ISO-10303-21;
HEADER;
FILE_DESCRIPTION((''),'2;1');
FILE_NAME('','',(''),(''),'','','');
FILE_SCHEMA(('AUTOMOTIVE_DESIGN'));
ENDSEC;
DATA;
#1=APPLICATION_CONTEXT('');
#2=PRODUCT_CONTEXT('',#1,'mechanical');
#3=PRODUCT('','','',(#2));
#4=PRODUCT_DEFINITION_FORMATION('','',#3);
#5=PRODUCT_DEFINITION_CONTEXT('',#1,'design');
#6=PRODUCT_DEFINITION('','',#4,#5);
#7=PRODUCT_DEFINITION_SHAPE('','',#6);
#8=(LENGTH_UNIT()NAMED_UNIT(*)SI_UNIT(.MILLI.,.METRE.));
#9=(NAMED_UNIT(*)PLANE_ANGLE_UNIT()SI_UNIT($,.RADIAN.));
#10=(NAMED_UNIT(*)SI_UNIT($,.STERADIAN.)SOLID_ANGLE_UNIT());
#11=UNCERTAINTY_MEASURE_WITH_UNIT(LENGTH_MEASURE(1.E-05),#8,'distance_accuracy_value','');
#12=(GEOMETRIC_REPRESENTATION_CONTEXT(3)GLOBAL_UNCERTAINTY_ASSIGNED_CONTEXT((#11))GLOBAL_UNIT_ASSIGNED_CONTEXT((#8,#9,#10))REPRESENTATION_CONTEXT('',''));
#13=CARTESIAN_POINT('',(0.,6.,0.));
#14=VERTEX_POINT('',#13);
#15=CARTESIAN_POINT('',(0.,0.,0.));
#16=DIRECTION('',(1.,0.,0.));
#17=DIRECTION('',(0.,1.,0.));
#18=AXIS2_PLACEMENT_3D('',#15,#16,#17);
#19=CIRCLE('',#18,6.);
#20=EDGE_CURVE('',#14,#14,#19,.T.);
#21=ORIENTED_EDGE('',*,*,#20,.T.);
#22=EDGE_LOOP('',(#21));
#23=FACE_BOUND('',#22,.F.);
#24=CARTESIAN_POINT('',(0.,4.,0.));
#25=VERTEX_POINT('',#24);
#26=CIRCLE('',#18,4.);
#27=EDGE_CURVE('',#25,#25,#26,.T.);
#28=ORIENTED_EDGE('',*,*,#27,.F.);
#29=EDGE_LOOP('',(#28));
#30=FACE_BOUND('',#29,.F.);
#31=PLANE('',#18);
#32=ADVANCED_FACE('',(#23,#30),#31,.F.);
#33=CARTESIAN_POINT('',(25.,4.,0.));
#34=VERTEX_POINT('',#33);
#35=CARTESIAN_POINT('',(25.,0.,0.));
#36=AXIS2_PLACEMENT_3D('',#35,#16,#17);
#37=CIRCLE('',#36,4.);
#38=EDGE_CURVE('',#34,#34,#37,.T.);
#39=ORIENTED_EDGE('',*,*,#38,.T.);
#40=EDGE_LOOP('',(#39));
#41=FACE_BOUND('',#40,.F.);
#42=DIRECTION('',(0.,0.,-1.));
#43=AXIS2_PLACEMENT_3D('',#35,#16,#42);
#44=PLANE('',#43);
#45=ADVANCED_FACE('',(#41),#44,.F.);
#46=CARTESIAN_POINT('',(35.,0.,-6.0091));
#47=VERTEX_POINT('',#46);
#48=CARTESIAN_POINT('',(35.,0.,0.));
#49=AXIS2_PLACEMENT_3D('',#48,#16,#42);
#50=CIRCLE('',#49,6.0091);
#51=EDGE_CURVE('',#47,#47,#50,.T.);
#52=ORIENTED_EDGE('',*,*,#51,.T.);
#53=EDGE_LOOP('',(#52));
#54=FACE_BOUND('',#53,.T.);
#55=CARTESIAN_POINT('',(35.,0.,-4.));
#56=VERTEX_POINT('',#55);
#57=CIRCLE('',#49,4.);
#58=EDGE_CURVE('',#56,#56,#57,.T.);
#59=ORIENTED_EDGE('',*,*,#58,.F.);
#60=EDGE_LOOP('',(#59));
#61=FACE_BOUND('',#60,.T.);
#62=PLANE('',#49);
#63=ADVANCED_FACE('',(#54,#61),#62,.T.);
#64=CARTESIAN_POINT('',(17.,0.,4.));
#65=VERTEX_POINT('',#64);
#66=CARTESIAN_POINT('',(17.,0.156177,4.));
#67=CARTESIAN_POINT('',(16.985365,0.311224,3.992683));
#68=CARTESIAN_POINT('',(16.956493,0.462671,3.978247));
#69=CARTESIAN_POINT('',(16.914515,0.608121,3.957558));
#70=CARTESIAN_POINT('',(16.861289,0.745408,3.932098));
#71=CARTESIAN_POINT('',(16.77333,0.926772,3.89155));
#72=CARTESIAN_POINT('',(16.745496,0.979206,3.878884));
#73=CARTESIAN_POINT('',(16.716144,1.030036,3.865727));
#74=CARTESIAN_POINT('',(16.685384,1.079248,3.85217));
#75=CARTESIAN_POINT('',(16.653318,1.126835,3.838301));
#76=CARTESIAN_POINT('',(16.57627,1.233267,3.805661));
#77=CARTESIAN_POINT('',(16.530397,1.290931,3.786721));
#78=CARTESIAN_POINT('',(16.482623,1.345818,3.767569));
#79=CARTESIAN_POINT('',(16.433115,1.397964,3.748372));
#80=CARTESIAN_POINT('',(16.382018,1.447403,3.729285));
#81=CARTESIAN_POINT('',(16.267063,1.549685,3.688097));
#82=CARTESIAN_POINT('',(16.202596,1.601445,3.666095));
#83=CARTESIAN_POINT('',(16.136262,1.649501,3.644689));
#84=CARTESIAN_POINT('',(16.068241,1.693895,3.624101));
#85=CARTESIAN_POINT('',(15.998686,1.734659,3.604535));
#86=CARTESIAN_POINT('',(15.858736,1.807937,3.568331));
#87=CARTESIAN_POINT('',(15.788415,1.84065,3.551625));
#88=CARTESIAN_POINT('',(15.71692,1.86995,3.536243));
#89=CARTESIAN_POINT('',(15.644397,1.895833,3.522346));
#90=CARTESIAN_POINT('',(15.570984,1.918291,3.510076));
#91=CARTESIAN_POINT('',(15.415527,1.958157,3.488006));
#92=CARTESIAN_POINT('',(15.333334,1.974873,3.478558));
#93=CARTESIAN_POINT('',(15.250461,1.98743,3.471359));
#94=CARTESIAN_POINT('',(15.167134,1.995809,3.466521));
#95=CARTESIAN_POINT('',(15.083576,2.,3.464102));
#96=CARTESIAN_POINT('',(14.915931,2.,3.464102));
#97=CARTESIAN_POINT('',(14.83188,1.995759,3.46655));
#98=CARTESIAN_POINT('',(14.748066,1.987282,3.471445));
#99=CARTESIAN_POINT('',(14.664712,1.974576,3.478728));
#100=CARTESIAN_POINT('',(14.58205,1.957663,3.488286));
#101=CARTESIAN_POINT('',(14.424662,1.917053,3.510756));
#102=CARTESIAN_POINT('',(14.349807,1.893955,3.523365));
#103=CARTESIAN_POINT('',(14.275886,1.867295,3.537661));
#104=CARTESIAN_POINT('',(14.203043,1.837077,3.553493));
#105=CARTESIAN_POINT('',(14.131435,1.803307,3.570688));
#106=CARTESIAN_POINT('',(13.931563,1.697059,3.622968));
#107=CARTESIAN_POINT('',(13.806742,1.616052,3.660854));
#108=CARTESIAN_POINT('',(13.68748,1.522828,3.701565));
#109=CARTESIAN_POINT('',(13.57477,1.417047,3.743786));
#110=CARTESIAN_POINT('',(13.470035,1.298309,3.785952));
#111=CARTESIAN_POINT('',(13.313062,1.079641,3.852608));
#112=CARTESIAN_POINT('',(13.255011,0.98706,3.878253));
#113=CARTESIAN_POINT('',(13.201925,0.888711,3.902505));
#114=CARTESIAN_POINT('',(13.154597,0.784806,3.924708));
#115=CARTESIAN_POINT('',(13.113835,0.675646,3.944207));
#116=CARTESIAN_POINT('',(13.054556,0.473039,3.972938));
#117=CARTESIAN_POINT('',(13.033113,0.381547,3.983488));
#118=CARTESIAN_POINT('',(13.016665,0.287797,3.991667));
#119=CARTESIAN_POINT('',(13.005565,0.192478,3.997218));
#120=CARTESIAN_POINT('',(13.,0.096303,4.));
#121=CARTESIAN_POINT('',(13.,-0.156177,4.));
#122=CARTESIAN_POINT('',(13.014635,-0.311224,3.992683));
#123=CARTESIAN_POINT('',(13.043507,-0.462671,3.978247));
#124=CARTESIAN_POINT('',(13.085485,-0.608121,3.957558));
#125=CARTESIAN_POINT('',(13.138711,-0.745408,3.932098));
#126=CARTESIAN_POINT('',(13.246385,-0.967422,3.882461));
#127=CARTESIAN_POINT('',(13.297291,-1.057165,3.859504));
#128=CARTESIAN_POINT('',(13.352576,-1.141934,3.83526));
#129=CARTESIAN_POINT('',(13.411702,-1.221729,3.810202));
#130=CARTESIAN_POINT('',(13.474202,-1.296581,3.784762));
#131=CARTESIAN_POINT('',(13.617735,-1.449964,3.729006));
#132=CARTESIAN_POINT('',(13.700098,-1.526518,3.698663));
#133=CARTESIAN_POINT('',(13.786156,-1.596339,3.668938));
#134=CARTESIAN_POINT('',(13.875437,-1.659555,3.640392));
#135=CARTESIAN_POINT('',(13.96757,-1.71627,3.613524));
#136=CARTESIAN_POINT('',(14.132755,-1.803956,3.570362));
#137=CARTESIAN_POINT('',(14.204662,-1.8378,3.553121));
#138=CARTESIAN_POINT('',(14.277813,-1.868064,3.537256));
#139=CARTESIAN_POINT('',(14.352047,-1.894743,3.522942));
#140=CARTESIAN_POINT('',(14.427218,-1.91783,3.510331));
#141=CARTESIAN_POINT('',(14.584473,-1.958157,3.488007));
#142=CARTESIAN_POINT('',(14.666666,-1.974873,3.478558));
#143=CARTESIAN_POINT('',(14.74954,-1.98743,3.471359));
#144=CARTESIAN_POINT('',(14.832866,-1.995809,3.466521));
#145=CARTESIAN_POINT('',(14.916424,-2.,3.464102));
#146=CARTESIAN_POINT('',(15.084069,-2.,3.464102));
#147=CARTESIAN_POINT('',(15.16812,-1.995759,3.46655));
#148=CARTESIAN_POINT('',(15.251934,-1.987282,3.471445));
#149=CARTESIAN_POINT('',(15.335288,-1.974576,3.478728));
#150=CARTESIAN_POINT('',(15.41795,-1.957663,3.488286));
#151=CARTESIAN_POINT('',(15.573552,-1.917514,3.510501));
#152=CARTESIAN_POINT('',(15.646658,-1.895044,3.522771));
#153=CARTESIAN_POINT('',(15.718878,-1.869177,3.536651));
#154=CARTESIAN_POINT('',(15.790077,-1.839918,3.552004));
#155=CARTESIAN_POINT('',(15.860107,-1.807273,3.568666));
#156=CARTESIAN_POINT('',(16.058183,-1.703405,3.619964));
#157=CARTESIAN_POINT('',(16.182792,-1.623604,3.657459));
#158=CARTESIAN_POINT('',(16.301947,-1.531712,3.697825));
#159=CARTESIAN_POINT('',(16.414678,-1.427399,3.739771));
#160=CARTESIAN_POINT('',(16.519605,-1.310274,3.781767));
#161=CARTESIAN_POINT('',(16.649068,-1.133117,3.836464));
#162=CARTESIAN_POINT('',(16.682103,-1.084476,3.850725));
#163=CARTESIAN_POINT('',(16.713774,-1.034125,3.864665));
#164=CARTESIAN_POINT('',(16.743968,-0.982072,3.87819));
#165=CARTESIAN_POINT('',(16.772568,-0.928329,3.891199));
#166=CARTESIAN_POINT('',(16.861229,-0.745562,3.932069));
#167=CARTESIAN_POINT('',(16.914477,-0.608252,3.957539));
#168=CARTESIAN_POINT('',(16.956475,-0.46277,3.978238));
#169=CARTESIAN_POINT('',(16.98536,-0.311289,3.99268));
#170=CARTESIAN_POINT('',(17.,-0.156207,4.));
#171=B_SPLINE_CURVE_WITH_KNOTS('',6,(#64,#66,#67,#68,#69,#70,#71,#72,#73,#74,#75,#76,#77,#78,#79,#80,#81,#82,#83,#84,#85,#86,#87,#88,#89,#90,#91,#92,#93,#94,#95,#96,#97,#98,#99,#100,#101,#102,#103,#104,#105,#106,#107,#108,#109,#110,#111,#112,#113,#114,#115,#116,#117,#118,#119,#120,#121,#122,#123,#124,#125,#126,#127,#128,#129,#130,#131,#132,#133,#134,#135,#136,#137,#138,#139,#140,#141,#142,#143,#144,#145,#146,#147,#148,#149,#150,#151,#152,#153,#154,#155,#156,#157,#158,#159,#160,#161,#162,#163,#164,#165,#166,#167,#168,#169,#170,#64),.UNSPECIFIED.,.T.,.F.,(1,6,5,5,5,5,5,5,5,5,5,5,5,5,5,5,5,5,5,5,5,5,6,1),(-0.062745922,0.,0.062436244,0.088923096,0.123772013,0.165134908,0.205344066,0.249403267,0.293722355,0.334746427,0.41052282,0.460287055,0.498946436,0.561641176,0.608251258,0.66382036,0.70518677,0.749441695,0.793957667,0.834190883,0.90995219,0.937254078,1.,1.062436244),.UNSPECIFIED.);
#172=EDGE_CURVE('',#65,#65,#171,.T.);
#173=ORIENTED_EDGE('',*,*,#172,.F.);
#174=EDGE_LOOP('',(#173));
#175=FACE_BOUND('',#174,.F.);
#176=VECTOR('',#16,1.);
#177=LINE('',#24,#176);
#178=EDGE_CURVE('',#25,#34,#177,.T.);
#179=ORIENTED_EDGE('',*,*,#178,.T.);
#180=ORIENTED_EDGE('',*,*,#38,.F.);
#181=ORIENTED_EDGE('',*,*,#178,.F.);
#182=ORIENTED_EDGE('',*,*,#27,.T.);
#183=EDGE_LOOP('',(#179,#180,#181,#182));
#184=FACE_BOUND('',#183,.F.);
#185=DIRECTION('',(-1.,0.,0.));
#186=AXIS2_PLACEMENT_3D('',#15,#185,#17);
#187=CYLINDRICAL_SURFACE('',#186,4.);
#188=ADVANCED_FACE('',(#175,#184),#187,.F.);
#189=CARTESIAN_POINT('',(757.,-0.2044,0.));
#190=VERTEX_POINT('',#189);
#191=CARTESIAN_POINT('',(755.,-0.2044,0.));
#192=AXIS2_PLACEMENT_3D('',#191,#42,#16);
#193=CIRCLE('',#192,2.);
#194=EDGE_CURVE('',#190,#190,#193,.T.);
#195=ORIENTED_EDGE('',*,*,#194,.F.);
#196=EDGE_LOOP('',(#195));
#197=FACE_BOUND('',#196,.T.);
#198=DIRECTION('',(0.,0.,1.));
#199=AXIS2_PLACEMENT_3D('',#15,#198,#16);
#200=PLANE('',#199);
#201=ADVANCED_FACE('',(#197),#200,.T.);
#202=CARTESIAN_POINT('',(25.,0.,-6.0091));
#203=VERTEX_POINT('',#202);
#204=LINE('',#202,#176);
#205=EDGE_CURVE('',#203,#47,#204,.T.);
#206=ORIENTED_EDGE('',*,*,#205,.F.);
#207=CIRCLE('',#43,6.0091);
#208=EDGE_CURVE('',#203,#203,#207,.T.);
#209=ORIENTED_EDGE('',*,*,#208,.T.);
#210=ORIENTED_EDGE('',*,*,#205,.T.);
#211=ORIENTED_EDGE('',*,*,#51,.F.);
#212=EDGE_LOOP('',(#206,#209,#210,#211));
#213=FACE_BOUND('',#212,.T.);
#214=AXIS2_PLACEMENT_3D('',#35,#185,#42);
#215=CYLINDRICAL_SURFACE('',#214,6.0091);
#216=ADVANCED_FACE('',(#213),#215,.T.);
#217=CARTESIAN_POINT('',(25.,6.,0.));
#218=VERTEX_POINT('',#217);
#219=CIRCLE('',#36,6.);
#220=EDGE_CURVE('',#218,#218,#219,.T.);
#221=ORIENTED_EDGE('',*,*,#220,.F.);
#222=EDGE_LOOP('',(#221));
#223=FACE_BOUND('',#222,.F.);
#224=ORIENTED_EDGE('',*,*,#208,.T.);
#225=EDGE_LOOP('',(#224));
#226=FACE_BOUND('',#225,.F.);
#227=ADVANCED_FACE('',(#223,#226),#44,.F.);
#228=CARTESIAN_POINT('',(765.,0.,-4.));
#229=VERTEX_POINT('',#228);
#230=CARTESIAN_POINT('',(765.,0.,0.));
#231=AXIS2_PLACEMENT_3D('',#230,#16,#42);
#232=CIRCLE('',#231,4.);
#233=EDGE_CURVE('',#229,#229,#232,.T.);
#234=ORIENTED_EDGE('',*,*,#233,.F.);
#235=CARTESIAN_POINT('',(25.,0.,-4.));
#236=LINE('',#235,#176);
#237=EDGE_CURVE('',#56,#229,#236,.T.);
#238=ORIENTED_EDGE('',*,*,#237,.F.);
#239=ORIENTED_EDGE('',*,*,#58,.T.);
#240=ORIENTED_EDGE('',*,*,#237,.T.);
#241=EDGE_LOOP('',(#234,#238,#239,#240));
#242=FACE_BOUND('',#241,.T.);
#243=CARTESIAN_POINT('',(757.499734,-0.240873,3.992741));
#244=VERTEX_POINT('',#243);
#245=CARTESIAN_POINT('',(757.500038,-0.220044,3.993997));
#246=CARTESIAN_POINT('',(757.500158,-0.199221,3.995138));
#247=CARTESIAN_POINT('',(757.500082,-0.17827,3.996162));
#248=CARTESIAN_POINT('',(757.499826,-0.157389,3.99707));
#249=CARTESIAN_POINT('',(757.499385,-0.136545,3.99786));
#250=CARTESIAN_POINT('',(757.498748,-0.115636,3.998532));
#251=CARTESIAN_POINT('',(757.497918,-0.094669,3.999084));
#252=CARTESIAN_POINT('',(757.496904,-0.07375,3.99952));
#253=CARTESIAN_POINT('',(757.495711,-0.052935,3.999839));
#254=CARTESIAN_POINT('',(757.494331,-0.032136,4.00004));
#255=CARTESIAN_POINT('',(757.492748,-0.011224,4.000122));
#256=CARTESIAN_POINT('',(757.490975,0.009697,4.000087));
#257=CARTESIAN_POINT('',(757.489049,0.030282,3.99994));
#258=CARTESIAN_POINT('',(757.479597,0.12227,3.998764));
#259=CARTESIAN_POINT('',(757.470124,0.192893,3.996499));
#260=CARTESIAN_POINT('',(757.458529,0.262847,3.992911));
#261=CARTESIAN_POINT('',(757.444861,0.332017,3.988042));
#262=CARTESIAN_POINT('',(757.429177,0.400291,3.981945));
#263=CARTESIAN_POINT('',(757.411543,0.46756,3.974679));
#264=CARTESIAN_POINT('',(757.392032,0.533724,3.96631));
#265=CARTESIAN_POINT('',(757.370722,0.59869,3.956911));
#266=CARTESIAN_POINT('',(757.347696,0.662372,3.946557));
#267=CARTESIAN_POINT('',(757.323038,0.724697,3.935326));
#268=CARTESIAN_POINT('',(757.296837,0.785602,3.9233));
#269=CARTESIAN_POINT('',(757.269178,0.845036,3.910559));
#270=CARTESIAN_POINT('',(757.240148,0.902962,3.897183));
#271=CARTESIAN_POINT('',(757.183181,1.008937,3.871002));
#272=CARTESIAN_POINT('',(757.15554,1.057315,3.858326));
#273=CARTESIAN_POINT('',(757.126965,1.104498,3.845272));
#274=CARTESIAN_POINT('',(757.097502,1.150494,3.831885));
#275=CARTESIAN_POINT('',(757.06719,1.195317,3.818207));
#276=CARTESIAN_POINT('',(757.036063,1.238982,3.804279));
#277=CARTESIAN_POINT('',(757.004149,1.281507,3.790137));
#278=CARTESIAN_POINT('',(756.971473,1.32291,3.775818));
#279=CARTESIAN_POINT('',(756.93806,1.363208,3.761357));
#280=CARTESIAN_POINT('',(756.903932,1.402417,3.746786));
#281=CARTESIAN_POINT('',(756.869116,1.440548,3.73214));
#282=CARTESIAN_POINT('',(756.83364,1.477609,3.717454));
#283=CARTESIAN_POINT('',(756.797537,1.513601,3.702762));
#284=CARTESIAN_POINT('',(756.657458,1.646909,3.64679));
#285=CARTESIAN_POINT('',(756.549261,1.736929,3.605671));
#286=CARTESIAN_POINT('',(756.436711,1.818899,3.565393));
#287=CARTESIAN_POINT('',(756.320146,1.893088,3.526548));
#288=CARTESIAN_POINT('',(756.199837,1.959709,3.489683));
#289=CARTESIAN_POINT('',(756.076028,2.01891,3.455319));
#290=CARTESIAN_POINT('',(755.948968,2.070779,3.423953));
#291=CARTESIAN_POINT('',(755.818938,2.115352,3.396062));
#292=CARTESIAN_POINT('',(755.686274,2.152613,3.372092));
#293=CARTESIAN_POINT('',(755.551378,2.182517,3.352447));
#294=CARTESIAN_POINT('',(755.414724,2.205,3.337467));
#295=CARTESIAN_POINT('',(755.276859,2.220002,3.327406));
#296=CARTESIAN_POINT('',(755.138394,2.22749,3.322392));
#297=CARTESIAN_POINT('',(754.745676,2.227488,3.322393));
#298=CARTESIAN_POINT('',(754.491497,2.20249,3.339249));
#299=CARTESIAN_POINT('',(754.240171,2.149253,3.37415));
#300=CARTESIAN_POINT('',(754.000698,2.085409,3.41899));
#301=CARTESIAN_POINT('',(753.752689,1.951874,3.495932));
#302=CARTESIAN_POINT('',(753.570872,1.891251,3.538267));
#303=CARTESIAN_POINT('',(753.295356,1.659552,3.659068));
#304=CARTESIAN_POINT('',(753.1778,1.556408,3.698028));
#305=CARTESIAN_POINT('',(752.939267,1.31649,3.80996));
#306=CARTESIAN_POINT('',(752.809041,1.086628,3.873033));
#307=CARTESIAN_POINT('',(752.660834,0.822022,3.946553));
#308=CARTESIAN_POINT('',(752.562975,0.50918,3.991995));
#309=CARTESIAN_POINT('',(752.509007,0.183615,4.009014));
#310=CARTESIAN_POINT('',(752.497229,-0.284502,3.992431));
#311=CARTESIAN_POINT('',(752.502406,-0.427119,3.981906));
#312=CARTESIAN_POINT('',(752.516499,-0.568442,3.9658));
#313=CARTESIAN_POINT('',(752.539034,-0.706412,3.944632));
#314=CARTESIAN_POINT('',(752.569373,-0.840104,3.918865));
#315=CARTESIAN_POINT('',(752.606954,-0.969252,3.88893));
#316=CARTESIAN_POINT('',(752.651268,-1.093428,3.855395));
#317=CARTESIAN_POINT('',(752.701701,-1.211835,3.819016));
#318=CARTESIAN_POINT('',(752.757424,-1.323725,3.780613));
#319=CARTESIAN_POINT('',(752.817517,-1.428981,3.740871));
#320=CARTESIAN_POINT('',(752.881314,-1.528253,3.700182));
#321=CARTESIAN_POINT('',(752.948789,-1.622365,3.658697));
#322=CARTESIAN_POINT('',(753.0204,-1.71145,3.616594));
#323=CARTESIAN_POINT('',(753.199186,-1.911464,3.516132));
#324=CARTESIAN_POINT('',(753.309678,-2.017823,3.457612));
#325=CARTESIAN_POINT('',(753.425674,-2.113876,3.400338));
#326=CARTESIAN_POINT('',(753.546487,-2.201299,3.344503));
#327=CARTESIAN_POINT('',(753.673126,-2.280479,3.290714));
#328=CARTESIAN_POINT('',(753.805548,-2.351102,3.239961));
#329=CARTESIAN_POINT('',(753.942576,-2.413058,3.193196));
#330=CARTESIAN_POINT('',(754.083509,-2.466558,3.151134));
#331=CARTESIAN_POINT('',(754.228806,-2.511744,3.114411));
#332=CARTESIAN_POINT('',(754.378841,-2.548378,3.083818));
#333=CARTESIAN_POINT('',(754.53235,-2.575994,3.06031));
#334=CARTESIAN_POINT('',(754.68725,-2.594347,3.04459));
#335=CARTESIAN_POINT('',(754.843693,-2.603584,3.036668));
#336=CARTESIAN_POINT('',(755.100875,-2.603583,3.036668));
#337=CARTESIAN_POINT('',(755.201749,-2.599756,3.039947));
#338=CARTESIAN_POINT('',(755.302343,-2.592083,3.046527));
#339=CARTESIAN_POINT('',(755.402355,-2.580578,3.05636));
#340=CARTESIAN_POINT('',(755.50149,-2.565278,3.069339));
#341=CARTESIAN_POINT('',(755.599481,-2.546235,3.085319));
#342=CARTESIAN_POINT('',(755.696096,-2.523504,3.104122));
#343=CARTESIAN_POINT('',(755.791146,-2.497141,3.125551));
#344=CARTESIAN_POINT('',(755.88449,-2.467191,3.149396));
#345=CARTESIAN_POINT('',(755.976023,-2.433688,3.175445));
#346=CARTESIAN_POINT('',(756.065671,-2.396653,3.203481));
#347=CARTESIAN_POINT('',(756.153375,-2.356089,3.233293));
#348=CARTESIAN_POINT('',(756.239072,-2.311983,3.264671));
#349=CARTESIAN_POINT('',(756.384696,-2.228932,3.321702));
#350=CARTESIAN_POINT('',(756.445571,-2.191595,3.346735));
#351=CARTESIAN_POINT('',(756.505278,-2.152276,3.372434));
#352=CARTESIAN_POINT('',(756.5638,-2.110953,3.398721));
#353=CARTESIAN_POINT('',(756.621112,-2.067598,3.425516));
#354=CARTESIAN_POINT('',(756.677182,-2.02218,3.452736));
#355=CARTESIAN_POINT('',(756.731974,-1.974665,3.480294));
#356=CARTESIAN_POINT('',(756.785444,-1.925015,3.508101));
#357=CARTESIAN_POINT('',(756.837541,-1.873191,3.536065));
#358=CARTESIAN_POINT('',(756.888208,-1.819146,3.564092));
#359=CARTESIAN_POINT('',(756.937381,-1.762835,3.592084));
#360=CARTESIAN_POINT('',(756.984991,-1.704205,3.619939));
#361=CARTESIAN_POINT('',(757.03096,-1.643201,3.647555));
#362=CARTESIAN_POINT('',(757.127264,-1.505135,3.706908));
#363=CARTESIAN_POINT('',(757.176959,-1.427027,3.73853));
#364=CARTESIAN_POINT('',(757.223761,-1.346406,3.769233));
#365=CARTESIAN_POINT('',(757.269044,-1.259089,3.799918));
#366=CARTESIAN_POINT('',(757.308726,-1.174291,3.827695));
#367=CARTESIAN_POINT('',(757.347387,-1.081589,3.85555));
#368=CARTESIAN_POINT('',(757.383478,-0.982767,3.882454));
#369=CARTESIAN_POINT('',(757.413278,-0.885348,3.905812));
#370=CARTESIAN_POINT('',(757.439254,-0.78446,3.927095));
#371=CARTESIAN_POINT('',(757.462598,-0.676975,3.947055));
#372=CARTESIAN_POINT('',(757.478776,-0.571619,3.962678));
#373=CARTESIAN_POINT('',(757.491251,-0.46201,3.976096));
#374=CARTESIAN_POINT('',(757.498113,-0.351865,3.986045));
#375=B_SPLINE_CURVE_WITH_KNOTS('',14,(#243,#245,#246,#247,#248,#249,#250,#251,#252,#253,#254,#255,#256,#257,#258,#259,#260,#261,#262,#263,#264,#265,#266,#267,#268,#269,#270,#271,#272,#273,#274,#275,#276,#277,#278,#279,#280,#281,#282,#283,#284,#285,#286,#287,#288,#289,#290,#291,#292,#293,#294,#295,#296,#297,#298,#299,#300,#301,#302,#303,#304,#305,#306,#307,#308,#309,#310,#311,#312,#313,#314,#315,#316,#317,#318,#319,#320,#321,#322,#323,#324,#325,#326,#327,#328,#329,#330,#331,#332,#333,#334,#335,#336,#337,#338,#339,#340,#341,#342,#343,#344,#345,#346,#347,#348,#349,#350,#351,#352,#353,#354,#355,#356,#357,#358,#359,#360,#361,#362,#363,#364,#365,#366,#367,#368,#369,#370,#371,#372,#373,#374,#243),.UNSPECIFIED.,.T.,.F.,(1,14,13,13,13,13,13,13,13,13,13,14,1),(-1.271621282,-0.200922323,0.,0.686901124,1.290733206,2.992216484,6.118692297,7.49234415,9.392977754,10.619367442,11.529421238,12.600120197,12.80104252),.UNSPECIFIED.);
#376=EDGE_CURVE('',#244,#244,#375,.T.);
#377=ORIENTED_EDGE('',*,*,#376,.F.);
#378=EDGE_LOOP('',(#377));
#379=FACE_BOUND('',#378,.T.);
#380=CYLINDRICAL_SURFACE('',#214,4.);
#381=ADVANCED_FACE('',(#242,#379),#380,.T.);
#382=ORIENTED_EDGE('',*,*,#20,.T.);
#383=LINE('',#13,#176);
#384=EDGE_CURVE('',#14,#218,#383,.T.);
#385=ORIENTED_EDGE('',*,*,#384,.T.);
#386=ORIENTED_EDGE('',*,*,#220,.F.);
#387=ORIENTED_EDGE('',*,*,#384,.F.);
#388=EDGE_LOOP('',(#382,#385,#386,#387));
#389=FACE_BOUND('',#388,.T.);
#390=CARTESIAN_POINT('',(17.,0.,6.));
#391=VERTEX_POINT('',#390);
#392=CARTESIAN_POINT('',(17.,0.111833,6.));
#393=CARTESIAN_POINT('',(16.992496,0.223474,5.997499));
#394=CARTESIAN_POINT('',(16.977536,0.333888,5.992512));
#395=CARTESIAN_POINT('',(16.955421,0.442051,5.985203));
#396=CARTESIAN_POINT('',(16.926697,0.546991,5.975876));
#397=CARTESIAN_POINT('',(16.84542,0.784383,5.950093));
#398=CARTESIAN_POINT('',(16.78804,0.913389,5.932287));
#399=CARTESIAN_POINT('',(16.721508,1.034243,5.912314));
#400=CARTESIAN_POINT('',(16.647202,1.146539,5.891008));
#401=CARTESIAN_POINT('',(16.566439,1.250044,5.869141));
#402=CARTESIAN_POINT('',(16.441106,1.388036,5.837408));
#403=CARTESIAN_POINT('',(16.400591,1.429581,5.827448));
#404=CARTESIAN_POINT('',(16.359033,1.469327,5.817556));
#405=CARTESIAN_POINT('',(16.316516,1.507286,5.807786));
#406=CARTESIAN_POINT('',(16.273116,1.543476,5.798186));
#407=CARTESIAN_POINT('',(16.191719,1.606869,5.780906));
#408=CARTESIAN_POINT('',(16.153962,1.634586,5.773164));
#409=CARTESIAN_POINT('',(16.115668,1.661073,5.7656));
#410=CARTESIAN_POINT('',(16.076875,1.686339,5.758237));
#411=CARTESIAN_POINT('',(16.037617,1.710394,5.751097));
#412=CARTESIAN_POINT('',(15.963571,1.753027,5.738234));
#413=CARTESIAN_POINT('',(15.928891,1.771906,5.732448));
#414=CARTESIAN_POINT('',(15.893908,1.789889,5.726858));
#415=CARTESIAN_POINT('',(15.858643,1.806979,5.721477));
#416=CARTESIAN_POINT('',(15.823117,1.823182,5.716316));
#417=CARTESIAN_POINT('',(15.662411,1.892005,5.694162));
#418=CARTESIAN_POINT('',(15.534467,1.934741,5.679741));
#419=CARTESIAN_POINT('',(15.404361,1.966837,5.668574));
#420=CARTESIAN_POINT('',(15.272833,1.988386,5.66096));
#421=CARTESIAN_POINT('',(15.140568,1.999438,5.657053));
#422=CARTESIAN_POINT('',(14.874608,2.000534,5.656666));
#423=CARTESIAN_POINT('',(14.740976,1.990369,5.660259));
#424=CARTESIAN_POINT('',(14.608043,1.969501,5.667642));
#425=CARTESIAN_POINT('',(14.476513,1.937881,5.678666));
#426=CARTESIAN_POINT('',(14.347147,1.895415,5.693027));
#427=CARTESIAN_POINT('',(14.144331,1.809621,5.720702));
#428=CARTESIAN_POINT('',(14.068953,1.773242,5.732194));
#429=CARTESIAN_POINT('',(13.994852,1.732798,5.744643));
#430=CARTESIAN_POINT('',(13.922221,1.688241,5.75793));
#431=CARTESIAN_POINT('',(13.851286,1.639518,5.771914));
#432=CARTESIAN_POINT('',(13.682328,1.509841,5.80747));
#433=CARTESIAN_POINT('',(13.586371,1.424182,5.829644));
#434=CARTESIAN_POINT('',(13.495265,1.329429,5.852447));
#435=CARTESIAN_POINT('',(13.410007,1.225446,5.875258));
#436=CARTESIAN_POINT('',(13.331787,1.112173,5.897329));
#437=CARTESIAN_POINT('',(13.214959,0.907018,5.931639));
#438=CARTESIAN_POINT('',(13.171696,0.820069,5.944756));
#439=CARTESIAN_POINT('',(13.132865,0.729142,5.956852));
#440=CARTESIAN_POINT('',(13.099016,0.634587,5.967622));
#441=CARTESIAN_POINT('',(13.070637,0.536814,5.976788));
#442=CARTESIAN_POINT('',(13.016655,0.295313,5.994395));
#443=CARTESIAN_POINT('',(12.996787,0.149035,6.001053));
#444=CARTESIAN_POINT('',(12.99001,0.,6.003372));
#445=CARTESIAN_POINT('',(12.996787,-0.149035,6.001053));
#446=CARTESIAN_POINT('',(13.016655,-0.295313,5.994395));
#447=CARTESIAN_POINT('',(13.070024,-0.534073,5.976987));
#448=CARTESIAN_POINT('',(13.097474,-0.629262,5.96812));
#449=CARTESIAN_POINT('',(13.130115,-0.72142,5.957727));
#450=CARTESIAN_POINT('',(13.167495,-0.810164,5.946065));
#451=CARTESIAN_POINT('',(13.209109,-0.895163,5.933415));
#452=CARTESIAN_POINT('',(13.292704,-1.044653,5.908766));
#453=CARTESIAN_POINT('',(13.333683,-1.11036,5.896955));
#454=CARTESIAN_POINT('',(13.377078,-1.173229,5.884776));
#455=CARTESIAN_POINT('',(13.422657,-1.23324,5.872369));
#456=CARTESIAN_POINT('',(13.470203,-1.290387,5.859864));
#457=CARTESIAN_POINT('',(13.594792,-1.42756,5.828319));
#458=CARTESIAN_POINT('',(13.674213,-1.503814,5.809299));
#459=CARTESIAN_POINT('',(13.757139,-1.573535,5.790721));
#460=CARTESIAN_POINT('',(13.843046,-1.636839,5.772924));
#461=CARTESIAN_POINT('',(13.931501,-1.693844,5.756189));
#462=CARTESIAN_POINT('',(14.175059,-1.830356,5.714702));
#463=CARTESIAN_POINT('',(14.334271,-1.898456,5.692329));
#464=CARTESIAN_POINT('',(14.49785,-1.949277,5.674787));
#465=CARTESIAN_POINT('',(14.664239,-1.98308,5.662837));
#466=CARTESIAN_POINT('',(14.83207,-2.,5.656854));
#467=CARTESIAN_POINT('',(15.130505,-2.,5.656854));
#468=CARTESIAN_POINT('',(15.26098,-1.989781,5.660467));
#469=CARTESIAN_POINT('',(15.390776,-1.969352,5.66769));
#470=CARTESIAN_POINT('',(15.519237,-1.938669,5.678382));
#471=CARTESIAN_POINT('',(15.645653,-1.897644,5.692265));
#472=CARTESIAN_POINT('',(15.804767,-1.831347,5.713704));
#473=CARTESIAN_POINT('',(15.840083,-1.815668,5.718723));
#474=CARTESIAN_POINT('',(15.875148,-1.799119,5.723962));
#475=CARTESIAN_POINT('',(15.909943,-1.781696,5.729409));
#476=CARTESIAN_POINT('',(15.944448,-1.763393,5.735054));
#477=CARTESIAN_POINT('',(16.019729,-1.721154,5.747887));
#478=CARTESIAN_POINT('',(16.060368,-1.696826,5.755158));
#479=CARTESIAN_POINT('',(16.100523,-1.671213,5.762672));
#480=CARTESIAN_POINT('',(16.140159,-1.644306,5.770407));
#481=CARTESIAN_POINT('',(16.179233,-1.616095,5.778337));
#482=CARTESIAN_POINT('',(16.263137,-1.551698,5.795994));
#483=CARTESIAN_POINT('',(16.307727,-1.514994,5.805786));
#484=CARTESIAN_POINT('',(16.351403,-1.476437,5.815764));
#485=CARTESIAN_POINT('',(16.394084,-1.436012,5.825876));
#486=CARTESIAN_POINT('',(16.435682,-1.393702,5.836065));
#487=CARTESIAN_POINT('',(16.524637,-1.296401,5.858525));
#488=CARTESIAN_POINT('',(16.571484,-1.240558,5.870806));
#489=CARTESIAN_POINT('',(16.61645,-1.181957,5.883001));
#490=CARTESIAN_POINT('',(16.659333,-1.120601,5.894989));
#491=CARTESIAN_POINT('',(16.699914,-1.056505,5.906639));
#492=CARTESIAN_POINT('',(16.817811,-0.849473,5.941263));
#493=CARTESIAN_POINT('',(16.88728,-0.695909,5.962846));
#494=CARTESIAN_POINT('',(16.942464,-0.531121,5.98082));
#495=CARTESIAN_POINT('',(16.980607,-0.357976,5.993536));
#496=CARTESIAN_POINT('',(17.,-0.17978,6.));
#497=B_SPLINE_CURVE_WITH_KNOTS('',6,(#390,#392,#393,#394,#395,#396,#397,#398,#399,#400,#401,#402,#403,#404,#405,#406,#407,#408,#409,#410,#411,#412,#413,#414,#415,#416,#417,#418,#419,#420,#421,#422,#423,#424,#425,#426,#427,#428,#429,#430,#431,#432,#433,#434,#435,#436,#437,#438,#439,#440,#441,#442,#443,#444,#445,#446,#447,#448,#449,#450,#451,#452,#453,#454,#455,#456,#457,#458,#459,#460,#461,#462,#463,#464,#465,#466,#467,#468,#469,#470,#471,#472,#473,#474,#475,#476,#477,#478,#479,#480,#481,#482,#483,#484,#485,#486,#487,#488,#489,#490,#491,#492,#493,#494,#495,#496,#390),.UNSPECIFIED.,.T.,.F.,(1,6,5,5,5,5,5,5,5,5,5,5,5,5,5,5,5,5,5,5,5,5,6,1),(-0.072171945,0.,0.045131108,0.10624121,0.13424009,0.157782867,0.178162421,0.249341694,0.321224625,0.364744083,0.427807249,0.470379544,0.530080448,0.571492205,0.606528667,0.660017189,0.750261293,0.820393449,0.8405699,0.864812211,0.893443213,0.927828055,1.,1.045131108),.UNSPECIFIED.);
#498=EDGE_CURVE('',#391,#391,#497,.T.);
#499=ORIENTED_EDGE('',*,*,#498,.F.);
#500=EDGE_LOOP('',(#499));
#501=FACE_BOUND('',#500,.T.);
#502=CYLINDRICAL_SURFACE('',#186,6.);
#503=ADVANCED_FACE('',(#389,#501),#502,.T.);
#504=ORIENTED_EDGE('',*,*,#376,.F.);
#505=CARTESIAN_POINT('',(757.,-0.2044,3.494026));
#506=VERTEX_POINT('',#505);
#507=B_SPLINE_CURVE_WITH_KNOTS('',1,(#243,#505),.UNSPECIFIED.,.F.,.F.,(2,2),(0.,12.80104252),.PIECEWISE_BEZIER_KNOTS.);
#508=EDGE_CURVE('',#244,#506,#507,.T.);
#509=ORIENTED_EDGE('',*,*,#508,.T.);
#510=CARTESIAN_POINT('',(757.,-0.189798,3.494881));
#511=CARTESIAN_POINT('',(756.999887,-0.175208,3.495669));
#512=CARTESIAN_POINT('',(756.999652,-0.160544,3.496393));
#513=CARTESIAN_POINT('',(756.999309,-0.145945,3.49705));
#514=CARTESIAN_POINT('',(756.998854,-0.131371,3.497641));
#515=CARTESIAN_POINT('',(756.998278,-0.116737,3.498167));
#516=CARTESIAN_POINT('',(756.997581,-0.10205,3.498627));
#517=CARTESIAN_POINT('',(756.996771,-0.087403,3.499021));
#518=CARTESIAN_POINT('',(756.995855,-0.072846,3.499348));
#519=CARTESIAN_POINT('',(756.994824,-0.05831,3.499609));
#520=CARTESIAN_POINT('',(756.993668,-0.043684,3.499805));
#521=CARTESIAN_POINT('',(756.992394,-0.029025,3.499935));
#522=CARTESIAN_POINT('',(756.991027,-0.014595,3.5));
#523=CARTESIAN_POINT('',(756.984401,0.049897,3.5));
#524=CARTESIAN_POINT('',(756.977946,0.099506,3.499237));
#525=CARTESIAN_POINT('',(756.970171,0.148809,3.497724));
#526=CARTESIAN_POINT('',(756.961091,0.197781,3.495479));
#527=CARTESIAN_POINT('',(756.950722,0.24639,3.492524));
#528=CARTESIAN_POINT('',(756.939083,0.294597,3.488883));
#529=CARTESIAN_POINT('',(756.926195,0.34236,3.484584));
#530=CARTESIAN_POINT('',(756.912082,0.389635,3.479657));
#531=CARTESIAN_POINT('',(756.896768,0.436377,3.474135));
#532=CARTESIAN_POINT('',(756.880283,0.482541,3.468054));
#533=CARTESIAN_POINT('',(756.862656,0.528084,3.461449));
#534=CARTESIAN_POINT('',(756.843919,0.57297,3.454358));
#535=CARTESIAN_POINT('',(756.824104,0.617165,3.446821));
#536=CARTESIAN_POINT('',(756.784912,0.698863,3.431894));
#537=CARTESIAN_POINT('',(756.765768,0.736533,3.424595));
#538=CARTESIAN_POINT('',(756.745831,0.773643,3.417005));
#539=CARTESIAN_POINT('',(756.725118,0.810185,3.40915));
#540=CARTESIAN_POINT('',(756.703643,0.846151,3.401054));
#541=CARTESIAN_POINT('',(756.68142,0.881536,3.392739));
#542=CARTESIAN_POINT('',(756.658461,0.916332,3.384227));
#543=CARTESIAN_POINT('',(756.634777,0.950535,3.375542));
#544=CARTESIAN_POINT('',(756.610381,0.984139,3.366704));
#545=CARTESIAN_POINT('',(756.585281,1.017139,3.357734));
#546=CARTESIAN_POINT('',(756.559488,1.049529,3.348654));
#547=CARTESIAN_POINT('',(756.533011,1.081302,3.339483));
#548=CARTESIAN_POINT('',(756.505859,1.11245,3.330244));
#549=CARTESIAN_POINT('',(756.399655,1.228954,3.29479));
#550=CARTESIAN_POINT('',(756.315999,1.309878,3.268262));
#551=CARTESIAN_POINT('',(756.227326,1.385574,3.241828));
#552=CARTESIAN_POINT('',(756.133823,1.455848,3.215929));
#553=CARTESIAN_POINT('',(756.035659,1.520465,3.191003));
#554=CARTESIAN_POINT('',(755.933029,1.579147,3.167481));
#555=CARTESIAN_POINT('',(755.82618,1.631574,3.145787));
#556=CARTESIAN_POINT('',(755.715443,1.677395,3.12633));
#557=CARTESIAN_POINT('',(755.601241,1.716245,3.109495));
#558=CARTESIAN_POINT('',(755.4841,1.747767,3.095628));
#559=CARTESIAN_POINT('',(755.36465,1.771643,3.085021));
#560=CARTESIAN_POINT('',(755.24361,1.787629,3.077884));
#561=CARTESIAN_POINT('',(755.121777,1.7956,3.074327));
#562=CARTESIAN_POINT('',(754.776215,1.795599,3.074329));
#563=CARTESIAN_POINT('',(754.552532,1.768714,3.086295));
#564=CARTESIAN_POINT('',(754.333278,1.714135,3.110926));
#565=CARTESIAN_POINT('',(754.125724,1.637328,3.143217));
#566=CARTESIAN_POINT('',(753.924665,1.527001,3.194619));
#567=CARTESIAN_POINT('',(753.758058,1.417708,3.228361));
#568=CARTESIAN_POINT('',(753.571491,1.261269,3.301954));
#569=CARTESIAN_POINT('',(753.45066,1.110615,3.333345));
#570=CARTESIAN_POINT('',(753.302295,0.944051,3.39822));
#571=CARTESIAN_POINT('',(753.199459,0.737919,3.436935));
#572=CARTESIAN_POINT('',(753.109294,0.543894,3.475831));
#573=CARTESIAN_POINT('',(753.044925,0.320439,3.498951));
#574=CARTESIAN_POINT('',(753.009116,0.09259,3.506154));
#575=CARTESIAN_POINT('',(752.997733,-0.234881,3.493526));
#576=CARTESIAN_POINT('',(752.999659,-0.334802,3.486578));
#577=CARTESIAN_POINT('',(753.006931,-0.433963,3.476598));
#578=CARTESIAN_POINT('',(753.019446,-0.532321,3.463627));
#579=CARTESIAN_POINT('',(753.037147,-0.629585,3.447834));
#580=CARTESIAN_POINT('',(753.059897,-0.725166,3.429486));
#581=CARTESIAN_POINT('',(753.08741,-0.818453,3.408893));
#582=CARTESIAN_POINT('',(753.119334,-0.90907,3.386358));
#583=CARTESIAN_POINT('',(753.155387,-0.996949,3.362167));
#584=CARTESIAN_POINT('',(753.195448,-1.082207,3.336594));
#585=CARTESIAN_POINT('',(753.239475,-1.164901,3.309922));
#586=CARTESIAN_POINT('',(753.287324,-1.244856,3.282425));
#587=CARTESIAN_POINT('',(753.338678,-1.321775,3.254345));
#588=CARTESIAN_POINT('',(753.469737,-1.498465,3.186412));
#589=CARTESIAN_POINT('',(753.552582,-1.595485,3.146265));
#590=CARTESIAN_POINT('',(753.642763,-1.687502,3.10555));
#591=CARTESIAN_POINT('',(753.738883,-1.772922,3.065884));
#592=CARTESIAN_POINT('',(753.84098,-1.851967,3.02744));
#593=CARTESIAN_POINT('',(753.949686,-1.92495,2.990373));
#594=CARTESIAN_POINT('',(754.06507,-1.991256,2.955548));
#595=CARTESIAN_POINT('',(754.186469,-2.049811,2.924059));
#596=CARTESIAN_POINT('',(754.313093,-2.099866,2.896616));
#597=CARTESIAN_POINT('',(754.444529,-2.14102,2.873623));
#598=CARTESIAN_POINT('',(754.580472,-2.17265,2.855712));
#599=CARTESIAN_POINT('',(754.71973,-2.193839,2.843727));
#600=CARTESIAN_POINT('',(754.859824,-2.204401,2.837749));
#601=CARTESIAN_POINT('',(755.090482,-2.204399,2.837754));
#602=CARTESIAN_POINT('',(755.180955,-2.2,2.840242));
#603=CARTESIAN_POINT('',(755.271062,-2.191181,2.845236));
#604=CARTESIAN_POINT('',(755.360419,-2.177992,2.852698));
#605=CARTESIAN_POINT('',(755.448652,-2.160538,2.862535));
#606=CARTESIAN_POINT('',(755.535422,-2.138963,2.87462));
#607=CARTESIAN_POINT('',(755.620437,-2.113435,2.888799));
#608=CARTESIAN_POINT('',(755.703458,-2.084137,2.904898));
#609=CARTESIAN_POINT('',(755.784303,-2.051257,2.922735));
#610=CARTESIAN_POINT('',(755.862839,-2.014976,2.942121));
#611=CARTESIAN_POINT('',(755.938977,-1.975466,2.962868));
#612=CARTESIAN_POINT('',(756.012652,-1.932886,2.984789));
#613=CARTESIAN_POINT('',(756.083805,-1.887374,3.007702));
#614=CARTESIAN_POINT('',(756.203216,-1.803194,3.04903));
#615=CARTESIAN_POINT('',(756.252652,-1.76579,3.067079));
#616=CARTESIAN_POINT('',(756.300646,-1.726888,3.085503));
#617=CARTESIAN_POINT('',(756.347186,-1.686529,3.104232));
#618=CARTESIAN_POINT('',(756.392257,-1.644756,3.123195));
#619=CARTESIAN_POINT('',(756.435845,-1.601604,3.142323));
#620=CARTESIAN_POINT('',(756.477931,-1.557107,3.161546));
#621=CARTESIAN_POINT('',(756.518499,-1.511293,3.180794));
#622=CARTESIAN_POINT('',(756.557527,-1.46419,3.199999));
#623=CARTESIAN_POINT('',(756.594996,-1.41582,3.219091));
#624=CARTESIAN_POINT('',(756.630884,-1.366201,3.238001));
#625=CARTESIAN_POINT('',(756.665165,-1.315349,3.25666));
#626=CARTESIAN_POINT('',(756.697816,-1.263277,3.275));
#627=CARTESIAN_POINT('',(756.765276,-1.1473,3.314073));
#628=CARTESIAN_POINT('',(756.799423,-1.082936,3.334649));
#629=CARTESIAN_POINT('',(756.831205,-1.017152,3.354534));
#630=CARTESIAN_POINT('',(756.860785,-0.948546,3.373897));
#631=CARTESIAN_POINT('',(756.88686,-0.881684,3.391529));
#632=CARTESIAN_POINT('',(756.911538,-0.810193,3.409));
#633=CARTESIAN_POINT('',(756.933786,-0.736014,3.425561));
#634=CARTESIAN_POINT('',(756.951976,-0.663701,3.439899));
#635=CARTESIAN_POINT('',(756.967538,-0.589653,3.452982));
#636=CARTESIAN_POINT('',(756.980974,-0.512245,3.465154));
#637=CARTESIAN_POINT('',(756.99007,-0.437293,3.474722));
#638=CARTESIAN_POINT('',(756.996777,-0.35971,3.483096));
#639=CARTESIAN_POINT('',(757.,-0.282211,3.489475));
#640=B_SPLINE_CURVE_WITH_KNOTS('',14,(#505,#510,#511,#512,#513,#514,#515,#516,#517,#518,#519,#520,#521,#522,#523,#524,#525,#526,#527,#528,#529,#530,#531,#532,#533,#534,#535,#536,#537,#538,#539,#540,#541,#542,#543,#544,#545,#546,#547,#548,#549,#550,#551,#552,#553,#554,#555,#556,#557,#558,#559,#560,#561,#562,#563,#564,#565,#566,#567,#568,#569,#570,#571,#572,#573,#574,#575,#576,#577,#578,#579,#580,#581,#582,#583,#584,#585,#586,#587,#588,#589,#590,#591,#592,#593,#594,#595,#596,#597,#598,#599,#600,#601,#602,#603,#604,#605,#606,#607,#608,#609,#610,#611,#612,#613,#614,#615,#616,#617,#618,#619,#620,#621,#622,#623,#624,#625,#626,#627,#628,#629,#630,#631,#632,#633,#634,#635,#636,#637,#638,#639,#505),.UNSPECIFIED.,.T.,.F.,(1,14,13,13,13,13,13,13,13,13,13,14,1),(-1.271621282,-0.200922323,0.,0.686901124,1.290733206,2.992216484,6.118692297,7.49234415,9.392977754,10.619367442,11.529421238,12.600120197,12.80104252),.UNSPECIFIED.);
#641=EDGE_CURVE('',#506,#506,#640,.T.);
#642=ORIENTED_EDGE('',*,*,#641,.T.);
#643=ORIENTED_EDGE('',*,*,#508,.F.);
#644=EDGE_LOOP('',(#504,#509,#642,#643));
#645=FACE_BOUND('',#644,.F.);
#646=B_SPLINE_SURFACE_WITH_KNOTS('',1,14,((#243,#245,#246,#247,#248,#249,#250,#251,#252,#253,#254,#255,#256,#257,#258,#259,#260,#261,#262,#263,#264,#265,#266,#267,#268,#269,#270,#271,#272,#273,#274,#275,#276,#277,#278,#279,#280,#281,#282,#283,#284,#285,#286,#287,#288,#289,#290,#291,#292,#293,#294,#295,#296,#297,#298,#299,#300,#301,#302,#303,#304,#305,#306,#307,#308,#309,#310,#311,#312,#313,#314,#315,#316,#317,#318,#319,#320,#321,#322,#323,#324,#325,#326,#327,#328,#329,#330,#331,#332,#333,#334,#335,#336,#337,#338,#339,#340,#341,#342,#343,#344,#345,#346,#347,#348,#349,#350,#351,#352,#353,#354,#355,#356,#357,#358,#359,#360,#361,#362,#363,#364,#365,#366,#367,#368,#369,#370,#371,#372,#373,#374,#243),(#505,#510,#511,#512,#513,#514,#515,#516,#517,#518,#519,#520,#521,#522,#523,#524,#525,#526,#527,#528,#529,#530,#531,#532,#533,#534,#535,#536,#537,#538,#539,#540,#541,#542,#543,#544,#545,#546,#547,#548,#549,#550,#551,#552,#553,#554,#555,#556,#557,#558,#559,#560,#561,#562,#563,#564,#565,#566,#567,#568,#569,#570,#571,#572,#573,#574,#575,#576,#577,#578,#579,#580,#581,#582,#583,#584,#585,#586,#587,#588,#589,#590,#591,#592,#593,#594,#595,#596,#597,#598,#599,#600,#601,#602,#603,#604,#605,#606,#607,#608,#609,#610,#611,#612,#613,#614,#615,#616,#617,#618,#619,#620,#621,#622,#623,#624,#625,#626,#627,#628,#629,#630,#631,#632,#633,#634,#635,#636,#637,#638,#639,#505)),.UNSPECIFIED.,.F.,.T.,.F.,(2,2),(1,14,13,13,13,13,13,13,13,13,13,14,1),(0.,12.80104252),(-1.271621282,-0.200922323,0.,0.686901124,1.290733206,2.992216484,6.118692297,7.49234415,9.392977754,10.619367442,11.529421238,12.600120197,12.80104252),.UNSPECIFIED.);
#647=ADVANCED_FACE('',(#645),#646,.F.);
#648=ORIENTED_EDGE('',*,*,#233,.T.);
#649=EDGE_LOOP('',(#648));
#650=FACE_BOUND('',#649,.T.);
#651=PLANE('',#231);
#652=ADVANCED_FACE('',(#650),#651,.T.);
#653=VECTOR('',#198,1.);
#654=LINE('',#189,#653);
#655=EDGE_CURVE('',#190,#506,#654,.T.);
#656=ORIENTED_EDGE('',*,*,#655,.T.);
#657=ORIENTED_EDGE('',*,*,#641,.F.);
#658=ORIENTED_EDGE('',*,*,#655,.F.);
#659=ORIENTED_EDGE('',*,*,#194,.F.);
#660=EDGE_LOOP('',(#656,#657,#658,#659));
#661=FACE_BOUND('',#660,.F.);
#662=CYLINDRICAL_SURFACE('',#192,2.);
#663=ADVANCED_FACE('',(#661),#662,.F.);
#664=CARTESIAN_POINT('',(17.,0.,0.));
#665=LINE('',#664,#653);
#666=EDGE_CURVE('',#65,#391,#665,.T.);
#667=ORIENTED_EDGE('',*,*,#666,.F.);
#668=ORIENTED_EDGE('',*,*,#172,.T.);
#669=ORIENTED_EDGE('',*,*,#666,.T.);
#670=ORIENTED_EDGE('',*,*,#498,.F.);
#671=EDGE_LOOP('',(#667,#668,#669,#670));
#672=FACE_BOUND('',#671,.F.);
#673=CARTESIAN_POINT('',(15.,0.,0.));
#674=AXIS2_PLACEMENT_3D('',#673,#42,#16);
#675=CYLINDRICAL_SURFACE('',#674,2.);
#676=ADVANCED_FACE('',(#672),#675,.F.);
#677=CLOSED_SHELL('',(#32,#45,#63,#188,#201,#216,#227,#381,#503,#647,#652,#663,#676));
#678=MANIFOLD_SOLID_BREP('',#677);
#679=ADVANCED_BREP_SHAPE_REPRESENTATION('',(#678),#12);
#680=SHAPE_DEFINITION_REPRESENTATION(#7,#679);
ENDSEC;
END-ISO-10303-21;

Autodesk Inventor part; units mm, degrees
ref_plane "YZ Plane" through (0, 0, 0) normal (1, 0, 0) x (0, 1, 0)
ref_plane "XZ Plane" through (0, 0, 0) normal (0, 1, 0) x (-1, 0, 0)
ref_plane "XY Plane" through (0, 0, 0) normal (0, 0, 1) x (1, 0, 0)
sketch "Sketch1" plane through (0, 0, 0) normal (1, 0, 0) x (0, 1, 0)
  circle A0 centre (0, 0) radius 4
  circle A1 centre (0, 0) radius 6
  dimension "d0" = 8
  dimension "d1" = 12
extrude "Extrusion1" add sketch "Sketch1" along normal blind 25
sketch "Sketch2" plane through (25, 0, 0) normal (1, 0, 0) x (0, 0, -1)
  circle A0 centre (0, 0) radius 4
extrude "Extrusion2" add sketch "Sketch2" along normal blind 740
sketch "Sketch3" plane through (25, 0, 0) normal (1, 0, 0) x (0, 0, -1)
  circle A0 centre (0, 0) radius 4
  circle A1 centre (0, 0) radius 6.0091
extrude "Extrusion3" add sketch "Sketch3" along normal blind 10
sketch "Sketch4" plane through (0, 0, 0) normal (0, 0, 1) x (1, 0, 0)
  line L0 (25, 4) -> (25, -4) projected
  line L1 (25, 0) -> (15, 0)
  circle A0 centre (15, 0) radius 2
  point P0 (0, 0)
  dimension "d9" = 10
  dimension "d10" = 4
extrude "Extrusion4" cut sketch "Sketch4" along normal blind 740
thread "Thread1" size "M4x0.7" class "6H" standard "ANSI Metric M Profile" length 15
sketch "Sketch5" plane through (0, 0, 0) normal (0, 0, 1) x (1, 0, 0)
  line L0 (765, -4) -> (765, 4) projected
  line L1 (765, 0) -> (755, 0)
  circle A0 centre (755, -0.2044) radius 2
  point P0 (0, 0)
  dimension "d15" = 10
  dimension "d16" = 4
extrude "Extrusion5" cut sketch "Sketch5" along normal blind 60
chamfer "Chamfer1" distance 0.5 angle 45 1 edges at (753.0009, -0.2632, 3.9913)
properties part number "700_achse"
